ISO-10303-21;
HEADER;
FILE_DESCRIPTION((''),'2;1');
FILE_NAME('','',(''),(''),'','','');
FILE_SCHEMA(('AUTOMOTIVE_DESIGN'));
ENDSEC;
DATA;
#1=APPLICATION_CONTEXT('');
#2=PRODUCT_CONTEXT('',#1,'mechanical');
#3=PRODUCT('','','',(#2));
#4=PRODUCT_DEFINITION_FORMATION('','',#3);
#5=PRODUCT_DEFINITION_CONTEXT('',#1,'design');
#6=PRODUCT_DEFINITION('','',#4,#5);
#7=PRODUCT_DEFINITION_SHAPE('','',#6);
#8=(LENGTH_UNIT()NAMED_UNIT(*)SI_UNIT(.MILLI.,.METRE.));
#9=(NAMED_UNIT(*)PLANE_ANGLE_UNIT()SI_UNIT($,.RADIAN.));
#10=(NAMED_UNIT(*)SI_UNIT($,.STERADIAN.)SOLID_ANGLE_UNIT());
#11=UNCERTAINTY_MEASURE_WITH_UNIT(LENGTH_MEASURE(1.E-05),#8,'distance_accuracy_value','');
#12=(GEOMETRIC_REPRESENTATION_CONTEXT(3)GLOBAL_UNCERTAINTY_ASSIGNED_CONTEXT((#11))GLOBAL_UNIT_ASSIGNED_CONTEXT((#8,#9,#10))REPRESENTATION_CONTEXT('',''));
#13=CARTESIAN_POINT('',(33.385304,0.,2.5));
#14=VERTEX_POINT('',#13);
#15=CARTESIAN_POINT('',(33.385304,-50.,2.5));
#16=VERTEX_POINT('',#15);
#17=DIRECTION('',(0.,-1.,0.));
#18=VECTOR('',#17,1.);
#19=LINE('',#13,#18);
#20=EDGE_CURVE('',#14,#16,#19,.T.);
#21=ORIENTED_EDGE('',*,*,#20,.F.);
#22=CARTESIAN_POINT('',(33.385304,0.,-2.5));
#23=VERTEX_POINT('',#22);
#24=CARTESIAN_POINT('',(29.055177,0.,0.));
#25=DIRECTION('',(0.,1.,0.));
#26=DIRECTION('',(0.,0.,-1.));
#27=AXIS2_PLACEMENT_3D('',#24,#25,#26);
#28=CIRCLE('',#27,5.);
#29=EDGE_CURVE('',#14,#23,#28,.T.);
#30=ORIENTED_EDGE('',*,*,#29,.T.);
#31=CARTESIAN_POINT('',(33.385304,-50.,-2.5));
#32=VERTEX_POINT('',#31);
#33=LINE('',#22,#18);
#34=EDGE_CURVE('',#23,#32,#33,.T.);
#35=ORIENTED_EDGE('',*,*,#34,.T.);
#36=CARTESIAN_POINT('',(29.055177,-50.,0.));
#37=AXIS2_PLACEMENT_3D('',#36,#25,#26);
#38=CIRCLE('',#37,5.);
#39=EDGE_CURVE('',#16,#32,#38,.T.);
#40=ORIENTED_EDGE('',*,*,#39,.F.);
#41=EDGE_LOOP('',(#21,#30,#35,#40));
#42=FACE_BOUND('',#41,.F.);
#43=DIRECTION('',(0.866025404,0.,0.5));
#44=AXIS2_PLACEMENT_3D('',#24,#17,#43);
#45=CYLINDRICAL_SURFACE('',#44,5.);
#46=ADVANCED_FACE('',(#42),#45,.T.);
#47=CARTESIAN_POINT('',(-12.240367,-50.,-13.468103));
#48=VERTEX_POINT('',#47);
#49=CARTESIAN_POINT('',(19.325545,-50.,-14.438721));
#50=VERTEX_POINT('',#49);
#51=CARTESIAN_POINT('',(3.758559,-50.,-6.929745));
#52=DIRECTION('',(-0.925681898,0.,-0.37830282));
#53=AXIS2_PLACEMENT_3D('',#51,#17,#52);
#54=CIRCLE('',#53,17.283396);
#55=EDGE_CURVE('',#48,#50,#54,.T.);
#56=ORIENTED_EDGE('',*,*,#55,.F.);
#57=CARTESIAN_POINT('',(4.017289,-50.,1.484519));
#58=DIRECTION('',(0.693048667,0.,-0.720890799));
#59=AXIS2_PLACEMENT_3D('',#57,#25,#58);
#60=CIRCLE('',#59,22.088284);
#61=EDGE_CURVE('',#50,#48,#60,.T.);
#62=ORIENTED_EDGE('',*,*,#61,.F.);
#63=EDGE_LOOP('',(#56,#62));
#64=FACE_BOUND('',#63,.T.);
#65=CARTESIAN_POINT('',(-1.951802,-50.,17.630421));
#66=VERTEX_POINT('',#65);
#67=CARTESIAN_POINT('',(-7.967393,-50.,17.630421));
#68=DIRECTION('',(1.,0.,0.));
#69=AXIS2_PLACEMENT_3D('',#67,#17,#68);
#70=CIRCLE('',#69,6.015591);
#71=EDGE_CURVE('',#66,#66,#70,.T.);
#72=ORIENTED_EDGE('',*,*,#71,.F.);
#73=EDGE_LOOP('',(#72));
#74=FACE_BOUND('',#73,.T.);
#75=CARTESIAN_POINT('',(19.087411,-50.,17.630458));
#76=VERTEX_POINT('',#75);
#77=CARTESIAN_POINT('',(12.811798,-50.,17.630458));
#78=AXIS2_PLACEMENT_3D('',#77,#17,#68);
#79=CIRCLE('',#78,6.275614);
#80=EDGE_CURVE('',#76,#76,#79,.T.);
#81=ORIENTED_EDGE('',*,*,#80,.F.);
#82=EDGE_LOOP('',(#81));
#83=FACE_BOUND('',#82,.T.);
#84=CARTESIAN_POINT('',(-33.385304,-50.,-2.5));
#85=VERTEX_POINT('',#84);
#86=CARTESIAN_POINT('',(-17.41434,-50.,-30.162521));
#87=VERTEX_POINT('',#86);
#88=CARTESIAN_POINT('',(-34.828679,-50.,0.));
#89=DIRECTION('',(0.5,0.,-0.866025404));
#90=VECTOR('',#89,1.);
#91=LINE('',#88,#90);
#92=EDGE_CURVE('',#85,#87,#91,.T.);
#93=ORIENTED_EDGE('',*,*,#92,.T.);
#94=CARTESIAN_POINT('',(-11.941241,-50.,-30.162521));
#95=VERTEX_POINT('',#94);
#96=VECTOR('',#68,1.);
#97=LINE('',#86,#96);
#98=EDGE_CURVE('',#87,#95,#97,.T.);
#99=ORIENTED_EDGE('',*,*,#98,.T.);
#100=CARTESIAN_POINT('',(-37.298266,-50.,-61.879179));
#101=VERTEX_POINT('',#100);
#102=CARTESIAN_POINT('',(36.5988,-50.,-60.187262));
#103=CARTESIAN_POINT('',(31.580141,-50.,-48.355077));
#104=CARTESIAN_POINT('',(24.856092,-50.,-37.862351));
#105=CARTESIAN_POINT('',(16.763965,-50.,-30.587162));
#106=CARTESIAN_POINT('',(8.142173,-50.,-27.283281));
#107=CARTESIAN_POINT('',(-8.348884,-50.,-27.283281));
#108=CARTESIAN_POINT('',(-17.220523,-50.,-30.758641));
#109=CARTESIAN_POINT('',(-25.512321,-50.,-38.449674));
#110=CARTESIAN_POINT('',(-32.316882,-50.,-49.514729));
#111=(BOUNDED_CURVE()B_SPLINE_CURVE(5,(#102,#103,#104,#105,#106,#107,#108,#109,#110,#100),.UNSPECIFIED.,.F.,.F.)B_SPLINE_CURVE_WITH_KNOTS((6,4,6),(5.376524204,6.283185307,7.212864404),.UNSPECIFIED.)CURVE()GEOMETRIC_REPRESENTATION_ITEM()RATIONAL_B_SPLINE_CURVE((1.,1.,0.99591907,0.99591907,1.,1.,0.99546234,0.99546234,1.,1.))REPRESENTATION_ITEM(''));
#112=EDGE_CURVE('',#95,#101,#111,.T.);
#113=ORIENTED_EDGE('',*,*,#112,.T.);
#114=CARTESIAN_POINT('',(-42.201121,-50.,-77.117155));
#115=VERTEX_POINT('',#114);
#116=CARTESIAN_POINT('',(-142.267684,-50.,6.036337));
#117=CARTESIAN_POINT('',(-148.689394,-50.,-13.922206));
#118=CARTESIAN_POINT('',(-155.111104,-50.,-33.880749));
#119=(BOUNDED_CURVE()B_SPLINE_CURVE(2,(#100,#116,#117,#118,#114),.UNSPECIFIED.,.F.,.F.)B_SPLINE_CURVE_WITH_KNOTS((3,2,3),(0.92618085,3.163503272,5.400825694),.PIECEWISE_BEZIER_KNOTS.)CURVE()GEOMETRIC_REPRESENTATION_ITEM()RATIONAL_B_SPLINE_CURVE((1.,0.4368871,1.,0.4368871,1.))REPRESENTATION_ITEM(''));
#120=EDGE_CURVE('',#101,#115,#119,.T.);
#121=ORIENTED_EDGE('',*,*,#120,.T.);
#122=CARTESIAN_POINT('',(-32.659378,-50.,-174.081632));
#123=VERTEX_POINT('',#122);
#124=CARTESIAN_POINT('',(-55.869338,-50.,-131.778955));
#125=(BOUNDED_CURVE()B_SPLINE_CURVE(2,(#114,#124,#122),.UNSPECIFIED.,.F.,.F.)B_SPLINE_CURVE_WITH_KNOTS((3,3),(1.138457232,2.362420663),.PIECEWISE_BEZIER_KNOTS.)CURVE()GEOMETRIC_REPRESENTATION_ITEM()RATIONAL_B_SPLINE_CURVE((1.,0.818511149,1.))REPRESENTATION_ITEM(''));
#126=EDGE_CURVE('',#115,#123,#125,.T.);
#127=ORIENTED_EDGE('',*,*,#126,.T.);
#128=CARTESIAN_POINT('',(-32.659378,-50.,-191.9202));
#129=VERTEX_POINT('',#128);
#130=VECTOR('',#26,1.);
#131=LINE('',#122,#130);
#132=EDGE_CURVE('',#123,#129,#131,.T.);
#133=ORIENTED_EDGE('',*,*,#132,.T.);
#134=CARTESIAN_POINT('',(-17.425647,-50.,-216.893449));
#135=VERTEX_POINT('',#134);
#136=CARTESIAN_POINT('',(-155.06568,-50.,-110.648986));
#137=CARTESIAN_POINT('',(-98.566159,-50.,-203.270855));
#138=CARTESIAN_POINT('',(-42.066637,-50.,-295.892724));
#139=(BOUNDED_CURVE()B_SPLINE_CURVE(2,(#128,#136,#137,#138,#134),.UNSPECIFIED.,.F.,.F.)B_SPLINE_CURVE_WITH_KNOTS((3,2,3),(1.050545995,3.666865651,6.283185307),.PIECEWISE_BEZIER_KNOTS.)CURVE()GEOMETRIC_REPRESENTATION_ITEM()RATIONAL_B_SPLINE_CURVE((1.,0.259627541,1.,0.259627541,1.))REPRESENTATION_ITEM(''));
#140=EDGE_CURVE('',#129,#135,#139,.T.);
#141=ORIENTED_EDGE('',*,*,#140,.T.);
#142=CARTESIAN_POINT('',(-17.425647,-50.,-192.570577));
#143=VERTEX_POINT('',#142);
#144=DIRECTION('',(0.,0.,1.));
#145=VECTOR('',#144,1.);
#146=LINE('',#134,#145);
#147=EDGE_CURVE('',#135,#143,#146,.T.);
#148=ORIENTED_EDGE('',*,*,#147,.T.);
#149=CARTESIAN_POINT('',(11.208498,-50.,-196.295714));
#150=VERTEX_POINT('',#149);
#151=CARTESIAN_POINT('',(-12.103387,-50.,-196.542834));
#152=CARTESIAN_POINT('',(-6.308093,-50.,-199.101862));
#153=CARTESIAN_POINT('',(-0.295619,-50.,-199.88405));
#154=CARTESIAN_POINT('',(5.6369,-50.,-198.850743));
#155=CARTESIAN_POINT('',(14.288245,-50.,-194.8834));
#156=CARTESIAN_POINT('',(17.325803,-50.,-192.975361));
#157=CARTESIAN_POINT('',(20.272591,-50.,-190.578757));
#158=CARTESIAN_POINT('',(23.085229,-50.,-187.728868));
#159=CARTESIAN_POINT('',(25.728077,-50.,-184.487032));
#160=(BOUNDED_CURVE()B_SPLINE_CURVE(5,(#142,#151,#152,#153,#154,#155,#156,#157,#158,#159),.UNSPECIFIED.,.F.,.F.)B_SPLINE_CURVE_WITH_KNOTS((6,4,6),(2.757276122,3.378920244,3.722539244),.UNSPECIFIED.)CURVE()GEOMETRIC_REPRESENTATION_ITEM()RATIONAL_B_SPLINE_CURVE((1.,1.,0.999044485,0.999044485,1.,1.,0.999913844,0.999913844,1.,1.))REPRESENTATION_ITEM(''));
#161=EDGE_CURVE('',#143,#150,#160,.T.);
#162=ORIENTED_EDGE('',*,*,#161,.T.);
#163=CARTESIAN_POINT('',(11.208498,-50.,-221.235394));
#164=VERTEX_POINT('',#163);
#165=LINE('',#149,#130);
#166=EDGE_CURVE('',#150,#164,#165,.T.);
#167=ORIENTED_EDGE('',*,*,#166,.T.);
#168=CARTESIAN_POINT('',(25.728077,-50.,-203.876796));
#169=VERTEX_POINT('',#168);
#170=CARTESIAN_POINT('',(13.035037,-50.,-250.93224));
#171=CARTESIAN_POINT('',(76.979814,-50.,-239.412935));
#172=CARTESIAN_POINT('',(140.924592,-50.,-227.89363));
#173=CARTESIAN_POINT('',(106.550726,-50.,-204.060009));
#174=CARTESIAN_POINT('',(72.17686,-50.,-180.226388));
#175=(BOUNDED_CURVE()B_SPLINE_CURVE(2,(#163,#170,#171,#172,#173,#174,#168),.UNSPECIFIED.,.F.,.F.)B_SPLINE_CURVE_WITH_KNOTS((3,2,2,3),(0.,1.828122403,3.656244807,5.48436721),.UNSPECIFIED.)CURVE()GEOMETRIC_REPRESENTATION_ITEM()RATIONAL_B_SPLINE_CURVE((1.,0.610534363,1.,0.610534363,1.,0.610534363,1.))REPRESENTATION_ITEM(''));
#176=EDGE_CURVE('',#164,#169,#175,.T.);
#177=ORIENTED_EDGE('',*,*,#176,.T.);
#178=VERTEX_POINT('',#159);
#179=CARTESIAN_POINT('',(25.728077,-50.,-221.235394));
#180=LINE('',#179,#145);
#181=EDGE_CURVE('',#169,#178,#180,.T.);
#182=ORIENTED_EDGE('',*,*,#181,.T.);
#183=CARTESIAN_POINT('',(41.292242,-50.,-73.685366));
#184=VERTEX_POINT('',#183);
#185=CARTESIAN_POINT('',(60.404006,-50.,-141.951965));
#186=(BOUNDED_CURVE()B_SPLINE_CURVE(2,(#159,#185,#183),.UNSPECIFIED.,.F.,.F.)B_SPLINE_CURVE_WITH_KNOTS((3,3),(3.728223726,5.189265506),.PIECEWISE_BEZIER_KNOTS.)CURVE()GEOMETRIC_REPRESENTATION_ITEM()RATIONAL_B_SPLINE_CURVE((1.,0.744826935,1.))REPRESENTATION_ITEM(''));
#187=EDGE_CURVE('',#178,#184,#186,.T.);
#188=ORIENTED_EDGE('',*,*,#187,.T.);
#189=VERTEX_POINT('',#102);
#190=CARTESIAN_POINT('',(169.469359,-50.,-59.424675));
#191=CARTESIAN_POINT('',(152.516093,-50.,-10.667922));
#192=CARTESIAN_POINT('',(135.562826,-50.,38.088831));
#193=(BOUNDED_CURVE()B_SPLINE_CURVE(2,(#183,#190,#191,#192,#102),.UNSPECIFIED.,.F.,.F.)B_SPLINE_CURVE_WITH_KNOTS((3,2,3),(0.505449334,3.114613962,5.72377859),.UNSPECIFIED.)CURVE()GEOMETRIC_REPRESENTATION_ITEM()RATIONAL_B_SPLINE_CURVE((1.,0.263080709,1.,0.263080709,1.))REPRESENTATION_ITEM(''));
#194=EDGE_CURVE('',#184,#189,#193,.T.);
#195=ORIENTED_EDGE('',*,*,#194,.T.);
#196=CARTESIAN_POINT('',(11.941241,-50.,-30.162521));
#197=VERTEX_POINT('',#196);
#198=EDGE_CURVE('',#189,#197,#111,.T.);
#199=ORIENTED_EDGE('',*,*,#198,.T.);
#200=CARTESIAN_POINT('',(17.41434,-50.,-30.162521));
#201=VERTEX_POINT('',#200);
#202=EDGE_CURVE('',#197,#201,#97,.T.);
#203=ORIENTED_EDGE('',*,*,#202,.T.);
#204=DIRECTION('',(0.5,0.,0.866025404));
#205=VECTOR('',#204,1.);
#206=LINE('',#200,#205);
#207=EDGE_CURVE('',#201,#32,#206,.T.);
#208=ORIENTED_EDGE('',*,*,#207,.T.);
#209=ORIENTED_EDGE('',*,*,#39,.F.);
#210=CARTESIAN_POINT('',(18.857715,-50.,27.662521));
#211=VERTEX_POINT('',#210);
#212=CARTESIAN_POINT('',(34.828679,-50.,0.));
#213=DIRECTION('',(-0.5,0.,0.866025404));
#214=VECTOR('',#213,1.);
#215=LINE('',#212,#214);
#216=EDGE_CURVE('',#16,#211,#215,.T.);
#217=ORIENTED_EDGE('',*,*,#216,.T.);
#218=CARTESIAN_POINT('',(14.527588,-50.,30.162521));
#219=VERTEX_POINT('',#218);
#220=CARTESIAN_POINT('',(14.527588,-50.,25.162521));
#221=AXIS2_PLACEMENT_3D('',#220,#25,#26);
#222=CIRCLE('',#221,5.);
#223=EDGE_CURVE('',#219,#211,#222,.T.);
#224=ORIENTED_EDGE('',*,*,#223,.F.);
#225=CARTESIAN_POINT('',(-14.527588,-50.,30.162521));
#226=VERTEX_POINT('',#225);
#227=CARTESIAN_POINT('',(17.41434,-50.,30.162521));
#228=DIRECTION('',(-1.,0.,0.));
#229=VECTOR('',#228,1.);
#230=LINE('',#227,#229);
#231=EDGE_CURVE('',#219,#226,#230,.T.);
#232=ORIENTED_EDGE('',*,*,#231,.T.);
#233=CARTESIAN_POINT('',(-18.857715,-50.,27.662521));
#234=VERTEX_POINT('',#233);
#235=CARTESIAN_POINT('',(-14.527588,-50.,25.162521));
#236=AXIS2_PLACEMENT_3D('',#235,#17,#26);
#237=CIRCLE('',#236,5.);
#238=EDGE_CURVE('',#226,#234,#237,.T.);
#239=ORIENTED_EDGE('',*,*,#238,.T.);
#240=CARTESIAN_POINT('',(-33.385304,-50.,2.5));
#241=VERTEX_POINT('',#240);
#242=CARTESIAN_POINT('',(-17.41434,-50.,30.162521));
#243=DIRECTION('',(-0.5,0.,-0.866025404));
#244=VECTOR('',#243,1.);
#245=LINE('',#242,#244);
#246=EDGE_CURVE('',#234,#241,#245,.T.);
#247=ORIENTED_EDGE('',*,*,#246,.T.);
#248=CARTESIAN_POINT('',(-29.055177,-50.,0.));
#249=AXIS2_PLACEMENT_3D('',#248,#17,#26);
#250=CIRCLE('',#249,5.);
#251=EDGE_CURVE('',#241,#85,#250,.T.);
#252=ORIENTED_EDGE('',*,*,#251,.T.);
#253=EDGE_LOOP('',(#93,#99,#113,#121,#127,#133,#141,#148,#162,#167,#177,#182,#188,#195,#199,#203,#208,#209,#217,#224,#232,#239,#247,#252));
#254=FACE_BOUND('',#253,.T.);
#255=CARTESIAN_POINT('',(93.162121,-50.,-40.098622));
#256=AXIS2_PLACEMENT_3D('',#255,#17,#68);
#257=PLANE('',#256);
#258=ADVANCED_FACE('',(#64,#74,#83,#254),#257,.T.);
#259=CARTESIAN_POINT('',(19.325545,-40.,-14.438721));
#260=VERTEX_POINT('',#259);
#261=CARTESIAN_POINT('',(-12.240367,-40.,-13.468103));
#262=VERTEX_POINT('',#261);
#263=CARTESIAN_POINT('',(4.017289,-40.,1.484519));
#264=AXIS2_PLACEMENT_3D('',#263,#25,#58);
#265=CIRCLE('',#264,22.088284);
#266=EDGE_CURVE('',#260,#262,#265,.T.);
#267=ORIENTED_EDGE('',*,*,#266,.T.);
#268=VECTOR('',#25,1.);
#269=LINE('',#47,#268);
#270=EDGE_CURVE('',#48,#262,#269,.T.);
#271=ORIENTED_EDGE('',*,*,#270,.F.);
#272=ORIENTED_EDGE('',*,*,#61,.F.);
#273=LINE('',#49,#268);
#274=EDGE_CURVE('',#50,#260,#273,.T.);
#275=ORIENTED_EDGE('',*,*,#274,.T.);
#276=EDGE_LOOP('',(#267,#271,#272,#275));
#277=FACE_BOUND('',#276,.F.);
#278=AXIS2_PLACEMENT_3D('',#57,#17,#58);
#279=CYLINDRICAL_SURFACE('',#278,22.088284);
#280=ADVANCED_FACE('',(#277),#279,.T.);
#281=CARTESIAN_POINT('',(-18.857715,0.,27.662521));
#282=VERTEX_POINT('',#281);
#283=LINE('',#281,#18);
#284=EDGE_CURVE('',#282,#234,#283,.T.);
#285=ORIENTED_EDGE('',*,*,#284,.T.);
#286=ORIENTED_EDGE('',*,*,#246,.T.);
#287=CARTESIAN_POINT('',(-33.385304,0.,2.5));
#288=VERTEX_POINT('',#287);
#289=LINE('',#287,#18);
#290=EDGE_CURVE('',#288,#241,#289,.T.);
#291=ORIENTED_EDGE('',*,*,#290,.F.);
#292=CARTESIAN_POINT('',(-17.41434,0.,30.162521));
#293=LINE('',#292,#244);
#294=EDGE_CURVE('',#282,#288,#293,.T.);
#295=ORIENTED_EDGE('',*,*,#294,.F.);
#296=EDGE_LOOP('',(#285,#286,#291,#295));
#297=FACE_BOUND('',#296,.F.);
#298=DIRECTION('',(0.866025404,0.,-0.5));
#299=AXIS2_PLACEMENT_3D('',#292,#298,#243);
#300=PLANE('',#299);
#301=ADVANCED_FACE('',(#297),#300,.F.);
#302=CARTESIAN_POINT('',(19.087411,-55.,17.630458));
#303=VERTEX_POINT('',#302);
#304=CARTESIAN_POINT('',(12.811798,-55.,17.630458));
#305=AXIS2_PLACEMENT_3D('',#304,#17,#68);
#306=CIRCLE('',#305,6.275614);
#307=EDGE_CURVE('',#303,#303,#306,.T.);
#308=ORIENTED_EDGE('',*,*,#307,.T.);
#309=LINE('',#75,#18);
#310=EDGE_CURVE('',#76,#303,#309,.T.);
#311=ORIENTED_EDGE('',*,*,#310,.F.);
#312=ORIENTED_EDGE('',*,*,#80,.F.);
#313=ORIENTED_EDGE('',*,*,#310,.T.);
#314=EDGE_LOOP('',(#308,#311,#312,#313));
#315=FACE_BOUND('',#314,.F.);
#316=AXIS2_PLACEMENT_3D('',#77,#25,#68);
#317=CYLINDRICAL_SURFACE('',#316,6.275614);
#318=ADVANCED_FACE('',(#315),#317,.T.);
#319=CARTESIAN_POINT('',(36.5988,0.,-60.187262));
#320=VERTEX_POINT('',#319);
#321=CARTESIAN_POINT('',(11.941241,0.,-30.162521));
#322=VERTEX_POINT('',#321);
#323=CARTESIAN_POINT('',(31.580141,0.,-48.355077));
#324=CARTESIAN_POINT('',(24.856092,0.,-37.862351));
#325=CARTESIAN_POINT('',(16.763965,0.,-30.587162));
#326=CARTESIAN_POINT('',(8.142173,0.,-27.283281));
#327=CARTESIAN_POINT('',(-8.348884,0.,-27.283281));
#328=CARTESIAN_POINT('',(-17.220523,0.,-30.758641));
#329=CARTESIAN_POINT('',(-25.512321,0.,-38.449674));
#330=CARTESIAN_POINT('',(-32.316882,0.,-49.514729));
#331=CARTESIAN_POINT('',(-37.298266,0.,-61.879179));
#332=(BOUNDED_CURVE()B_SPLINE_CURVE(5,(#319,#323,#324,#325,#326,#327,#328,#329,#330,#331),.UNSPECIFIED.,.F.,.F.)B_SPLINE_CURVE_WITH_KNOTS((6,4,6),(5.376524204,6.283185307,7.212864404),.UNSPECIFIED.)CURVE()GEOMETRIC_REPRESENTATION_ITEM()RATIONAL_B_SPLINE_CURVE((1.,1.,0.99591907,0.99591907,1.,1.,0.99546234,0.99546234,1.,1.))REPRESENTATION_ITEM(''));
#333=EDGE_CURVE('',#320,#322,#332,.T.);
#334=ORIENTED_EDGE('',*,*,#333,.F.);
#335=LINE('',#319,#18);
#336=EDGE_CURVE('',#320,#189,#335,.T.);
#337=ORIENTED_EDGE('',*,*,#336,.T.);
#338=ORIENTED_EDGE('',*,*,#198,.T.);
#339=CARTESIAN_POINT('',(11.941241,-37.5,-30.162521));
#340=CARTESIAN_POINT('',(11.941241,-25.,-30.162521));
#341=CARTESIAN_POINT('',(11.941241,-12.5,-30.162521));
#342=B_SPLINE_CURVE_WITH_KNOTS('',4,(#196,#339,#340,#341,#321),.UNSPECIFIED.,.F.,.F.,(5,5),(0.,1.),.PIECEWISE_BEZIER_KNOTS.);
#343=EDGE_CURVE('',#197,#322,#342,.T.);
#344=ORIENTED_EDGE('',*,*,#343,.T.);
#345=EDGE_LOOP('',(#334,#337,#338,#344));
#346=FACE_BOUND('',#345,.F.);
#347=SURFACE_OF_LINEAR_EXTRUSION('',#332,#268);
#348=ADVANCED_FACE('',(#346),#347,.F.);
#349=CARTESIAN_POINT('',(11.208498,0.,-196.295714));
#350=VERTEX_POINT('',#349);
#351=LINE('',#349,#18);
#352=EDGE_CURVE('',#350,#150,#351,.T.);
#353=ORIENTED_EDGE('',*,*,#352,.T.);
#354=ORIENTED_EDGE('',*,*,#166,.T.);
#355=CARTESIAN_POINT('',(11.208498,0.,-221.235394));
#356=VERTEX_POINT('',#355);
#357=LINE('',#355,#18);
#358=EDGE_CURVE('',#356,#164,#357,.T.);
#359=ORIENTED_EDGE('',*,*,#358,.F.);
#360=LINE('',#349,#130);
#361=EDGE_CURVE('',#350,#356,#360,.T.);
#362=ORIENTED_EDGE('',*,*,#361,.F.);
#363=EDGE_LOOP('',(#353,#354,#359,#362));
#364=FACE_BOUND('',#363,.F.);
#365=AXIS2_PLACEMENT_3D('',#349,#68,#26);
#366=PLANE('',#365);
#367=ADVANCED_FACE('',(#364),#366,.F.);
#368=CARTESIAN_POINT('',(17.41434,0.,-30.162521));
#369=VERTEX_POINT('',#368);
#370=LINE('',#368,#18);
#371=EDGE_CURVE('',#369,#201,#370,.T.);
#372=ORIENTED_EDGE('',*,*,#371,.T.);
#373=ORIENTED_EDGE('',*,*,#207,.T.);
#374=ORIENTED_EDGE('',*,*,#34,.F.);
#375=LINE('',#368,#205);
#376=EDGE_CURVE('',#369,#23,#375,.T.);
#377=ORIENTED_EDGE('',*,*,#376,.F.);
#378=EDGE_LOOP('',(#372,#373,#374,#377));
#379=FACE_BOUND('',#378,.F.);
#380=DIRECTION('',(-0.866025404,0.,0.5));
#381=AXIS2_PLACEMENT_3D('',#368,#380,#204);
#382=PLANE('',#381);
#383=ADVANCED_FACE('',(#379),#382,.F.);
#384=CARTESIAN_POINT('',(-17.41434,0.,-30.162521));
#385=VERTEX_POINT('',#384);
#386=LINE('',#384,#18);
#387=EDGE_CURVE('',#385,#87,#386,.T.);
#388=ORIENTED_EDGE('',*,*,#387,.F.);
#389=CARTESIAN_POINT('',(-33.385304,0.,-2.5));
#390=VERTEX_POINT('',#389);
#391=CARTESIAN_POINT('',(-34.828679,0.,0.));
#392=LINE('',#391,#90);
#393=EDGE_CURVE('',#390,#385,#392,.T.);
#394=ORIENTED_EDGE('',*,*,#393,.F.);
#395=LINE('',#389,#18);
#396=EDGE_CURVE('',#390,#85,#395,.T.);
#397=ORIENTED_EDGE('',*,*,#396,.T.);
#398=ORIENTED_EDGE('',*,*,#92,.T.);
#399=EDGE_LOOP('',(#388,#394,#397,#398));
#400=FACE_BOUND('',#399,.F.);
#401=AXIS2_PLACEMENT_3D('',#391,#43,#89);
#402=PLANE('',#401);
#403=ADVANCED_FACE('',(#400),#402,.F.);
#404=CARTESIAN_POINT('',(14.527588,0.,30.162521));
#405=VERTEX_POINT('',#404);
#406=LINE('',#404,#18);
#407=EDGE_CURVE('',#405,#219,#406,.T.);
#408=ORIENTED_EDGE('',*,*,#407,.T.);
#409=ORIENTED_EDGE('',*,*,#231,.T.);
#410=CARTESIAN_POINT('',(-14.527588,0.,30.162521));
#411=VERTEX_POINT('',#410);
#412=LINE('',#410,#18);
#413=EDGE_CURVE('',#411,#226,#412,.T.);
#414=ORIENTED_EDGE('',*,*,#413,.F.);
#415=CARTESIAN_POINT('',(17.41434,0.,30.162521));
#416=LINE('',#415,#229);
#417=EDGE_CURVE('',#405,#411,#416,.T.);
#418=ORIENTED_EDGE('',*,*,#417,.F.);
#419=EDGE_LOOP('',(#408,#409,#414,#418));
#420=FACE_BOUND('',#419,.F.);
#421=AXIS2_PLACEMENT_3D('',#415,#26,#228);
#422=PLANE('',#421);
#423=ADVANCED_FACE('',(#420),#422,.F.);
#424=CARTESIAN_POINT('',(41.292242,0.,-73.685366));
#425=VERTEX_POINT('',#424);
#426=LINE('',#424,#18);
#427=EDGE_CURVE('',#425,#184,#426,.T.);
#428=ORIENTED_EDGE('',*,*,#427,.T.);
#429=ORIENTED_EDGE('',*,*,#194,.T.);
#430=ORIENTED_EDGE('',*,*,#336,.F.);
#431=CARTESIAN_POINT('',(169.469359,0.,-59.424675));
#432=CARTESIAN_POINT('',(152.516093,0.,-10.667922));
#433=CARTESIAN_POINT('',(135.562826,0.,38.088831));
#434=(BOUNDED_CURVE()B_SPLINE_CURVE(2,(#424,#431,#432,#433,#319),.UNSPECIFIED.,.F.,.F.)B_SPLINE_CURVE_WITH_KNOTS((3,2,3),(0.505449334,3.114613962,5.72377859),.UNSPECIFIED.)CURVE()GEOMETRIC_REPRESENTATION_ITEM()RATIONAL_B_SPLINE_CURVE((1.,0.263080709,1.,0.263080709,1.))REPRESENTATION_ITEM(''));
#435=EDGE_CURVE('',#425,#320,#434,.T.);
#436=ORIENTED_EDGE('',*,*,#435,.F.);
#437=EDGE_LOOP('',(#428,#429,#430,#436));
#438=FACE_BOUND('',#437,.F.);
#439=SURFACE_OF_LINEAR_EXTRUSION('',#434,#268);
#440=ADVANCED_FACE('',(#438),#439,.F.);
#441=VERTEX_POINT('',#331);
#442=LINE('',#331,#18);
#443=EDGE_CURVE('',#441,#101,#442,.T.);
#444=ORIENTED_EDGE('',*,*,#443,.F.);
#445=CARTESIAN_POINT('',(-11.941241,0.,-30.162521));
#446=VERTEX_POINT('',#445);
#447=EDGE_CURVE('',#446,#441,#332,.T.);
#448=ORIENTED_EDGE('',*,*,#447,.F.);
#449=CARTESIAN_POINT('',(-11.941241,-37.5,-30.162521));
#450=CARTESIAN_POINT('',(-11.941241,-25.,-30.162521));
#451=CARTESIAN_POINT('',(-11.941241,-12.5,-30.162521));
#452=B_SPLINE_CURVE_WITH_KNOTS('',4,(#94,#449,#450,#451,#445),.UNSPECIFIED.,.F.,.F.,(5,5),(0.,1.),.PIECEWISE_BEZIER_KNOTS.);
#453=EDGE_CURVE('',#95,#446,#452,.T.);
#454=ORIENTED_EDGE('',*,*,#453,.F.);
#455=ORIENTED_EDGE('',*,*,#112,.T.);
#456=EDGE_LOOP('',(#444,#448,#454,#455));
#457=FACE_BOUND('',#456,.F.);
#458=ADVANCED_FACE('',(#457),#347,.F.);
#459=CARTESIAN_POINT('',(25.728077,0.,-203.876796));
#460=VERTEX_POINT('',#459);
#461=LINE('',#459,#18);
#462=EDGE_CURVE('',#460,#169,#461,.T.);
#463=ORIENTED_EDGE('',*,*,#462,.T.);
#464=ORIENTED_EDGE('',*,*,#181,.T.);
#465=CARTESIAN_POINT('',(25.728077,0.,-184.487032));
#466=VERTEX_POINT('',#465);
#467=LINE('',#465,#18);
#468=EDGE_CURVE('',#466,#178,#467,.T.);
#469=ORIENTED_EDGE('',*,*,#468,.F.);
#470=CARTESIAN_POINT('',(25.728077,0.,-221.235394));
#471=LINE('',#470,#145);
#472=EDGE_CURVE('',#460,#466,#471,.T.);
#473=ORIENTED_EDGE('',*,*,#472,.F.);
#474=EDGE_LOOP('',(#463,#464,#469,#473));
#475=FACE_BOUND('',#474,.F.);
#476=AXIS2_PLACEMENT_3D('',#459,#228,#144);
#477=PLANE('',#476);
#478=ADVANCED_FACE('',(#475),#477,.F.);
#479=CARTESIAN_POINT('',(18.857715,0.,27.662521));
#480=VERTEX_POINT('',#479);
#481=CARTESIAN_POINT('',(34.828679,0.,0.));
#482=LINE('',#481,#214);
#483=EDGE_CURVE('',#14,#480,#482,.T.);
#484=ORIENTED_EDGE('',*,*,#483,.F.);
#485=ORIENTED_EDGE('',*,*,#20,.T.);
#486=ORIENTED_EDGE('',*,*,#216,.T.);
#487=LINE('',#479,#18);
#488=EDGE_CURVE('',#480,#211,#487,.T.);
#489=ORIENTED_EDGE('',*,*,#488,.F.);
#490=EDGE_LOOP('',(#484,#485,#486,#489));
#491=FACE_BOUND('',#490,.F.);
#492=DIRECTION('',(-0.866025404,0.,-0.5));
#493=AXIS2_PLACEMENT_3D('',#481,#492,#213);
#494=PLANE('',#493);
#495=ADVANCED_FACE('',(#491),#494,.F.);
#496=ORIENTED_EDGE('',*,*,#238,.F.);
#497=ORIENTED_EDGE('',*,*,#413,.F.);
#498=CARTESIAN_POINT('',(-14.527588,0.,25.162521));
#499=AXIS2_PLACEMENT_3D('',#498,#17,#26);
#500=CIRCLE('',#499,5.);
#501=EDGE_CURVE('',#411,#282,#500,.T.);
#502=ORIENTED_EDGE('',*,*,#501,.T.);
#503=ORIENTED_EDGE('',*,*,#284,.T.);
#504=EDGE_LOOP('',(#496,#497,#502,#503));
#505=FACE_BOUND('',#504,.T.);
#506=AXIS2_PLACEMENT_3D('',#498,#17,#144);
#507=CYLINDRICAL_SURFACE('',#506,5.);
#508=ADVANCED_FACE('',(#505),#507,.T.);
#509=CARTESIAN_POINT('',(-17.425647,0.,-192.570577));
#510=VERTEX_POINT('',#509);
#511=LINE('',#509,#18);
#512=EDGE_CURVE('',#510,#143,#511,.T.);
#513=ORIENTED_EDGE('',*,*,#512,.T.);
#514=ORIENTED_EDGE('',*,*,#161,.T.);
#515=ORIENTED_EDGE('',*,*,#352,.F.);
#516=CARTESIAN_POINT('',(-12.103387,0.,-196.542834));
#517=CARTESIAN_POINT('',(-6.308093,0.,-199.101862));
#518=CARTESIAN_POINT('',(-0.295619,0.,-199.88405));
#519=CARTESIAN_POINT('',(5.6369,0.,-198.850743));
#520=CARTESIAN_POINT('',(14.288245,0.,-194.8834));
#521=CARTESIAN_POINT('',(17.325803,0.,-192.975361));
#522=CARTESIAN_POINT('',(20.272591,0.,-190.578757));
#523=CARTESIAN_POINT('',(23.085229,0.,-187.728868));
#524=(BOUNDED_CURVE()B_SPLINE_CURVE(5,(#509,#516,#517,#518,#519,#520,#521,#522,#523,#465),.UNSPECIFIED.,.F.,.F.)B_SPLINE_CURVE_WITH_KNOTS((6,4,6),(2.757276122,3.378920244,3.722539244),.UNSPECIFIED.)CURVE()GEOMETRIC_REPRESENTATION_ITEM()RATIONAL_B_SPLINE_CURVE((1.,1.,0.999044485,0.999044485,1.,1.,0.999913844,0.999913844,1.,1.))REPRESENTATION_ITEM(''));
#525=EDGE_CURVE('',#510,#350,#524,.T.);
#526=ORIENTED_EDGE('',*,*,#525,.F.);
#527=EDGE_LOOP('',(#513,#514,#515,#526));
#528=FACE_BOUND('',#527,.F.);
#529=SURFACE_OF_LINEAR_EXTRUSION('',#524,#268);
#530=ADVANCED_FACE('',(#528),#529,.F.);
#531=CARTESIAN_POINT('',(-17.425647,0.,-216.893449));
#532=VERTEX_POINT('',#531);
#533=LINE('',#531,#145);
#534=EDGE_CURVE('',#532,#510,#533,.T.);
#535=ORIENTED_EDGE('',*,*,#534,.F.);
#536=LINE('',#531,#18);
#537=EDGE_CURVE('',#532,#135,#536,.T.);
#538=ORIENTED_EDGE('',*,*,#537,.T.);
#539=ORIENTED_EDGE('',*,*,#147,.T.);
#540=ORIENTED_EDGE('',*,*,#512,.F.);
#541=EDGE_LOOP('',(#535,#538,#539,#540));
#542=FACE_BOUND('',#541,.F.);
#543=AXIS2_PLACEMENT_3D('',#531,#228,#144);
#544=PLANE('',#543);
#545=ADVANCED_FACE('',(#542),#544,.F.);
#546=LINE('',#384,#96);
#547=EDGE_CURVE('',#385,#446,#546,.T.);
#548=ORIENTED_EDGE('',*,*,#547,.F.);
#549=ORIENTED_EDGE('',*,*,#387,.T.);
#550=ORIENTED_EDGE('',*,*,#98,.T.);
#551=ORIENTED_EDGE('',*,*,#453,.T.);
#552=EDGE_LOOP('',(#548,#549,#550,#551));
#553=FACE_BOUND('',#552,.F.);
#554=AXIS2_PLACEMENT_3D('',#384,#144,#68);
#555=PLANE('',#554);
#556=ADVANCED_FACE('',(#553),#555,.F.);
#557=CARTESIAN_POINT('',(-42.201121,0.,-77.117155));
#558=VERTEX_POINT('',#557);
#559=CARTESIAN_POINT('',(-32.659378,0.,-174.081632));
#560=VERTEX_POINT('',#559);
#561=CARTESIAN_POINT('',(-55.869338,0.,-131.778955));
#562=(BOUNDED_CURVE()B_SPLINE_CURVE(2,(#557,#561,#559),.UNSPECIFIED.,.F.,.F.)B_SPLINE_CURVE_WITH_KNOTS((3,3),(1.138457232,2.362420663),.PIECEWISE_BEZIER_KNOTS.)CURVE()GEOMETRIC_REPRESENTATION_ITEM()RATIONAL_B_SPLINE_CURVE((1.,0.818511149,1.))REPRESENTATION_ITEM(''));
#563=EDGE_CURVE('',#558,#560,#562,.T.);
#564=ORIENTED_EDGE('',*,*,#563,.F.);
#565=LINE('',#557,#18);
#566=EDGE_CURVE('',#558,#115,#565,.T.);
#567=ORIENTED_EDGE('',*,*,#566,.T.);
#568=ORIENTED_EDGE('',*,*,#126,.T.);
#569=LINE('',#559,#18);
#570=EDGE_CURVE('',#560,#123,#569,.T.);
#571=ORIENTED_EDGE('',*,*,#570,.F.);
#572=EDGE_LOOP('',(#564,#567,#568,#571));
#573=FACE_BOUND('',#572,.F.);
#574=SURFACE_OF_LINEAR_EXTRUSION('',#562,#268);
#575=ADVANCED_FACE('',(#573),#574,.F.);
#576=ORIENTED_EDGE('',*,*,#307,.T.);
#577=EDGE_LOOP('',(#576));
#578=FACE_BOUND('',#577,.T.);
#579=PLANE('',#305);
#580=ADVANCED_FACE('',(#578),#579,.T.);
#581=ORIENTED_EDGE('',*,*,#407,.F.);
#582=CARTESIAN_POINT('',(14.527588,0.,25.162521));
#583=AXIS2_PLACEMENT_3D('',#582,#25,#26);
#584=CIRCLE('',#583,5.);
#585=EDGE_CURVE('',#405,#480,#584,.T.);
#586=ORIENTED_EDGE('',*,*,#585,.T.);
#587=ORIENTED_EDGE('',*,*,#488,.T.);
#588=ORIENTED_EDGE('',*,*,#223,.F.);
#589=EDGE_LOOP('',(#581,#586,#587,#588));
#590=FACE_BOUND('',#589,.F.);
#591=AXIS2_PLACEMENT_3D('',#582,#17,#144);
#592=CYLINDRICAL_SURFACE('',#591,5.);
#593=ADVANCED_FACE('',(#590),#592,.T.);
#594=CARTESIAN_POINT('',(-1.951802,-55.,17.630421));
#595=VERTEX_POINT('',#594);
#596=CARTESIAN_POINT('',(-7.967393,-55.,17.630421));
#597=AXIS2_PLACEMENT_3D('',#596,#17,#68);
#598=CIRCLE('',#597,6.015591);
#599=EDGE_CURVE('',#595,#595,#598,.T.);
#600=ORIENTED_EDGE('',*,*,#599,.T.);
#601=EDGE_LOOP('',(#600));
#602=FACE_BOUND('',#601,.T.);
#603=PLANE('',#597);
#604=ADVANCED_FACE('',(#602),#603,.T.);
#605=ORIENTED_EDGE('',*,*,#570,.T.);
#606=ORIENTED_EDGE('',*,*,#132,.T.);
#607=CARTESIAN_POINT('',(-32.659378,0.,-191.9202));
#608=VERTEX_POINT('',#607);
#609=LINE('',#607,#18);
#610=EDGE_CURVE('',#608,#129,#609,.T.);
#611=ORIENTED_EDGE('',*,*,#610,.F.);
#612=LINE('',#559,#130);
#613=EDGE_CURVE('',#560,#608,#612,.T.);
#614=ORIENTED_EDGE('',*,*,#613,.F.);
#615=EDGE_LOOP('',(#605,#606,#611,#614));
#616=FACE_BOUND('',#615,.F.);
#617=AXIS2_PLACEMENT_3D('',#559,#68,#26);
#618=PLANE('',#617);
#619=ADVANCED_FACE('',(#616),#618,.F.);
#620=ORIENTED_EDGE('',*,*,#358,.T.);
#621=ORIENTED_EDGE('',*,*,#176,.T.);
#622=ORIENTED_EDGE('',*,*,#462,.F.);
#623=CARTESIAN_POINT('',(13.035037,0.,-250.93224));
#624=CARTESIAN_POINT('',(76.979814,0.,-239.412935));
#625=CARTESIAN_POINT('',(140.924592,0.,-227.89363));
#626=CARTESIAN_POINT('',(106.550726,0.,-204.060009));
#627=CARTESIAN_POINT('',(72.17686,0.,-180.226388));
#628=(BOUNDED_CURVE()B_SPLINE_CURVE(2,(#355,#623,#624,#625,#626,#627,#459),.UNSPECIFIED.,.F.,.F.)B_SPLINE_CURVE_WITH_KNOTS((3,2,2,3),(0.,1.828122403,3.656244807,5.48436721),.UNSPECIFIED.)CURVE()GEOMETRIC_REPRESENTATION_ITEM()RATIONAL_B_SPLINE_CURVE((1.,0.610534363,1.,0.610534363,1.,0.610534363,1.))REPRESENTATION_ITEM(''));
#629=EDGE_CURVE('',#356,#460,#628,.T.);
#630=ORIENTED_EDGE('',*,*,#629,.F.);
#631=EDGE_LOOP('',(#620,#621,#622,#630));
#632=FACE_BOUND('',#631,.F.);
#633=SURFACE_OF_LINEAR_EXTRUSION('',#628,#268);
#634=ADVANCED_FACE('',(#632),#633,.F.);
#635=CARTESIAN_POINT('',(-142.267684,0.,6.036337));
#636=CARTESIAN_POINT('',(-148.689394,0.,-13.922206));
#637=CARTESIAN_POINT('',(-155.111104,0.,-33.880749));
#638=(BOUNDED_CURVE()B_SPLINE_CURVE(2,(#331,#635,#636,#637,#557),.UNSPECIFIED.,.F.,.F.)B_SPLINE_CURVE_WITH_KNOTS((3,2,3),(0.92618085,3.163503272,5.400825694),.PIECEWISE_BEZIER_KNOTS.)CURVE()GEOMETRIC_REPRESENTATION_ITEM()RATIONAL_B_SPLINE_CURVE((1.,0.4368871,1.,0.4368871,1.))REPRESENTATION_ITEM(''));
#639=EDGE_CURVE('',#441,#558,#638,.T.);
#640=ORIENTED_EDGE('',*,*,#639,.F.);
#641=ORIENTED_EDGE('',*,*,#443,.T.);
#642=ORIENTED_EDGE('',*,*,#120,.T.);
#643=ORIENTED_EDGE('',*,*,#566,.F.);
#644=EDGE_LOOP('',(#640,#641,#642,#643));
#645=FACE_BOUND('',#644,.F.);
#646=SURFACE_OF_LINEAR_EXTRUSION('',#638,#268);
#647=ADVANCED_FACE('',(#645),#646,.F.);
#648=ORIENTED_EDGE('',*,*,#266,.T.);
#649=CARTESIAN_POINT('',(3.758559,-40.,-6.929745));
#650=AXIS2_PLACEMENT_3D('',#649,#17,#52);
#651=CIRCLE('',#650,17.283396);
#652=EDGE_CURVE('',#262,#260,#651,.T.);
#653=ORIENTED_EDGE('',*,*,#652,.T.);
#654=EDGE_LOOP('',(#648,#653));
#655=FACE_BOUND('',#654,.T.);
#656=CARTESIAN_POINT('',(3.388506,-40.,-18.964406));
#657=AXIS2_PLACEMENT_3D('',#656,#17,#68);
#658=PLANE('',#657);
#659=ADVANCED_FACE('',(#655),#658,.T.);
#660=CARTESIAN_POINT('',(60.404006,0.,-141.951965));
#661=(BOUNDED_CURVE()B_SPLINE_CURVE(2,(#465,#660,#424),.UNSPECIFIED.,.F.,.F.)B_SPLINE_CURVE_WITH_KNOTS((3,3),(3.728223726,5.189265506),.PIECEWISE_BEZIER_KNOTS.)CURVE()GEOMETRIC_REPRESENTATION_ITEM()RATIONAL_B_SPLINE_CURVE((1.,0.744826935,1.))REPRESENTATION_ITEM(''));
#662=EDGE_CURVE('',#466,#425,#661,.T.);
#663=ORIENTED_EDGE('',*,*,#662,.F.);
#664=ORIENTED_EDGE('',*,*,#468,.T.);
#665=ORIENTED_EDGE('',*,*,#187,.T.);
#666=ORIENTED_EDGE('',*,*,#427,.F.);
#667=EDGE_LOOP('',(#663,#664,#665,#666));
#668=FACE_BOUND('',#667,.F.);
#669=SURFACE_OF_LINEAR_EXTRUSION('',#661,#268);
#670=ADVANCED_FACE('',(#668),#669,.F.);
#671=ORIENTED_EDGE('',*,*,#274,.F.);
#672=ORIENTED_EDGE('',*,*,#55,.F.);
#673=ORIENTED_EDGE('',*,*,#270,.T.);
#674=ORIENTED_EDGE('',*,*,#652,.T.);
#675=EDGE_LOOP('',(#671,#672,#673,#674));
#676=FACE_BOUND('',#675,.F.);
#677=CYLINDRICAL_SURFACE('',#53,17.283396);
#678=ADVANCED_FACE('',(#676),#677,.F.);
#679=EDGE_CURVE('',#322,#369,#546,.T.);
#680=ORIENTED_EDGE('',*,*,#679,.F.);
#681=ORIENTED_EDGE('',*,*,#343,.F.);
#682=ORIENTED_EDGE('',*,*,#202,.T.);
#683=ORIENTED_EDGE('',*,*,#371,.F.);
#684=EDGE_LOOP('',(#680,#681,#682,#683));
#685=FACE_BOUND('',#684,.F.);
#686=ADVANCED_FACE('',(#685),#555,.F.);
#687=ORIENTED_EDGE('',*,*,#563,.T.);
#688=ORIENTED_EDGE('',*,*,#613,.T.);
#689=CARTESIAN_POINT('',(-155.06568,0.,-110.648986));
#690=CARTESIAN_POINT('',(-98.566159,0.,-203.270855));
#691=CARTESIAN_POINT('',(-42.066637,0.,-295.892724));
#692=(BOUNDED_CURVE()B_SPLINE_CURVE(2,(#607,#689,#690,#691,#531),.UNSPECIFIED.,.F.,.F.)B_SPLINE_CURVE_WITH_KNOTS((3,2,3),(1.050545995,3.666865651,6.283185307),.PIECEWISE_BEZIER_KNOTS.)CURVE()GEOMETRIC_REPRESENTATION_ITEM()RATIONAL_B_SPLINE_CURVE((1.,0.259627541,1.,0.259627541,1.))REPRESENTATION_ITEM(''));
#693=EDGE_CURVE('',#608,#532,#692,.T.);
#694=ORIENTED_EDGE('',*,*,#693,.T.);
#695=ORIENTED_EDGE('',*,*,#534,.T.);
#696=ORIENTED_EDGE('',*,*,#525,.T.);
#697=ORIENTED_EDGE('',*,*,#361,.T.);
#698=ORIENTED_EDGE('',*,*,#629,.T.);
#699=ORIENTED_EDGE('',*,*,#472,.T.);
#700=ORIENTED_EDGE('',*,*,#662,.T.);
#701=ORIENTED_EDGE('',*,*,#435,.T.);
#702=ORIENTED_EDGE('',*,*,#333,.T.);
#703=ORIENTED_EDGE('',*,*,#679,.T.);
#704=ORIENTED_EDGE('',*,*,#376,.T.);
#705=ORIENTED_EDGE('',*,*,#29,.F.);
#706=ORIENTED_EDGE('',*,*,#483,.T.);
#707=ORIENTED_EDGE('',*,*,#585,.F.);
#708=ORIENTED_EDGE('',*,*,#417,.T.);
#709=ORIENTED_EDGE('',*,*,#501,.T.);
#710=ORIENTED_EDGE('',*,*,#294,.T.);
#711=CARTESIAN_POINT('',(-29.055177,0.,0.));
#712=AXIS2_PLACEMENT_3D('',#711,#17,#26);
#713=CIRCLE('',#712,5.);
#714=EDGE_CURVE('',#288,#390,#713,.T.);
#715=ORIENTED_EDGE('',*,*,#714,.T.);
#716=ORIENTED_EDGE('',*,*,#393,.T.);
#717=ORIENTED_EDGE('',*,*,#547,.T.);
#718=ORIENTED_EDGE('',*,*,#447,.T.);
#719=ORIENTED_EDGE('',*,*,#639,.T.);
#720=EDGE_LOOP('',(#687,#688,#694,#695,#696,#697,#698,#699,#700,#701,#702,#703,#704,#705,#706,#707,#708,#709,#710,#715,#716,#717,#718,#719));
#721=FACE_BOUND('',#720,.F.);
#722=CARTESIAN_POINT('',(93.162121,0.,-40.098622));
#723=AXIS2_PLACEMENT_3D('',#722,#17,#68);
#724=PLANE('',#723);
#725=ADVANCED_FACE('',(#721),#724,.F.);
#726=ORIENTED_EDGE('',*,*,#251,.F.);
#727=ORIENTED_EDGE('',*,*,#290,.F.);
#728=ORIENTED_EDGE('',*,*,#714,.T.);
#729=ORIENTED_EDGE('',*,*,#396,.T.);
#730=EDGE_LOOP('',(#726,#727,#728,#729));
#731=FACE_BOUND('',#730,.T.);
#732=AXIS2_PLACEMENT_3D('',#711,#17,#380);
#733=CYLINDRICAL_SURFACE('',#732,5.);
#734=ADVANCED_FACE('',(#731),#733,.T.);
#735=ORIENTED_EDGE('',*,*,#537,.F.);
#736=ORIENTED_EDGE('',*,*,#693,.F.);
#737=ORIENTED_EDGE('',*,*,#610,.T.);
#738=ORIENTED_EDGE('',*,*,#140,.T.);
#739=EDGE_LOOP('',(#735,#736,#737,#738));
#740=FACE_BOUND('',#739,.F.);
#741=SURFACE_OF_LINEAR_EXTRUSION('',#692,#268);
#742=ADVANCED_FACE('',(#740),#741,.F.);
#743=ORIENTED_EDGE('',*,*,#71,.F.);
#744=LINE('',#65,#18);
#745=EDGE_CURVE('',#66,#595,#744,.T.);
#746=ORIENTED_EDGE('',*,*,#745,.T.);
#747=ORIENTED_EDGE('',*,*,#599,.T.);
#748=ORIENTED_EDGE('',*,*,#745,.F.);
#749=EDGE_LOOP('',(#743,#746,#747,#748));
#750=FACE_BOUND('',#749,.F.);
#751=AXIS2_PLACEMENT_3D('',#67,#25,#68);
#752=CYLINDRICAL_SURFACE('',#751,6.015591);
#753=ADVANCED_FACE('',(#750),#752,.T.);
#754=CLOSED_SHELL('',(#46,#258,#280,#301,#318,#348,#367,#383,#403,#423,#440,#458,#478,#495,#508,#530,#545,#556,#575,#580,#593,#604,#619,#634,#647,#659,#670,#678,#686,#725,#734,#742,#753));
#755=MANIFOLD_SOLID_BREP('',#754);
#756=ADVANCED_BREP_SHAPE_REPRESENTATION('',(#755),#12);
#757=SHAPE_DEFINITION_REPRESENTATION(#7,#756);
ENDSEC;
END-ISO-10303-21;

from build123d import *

# Parameters (mm, degrees)
F1_DEPTH = 50
F2_R     = 6.0155907658
F2_R_2   = 6.2756136539
F3_DEPTH = 5
F4_DEPTH = 10
F5_R     = 5
F7_DEPTH = 50


with BuildPart() as f1:
    # F0 (on Front) → F1 (new body)
    with BuildSketch(Plane.XZ):
        Polygon((17.4143397291, 30.1625211911), (-17.4143397291, 30.1625211911), (-34.8286794583, 0), (-17.4143397291, -30.1625211911), (17.4143397291, -30.1625211911), (34.8286794583, 0), align=None)
    extrude(amount=F1_DEPTH)

    # F2 (on face) → F3 (join)
    with BuildSketch(Plane.XZ.offset(50)):
        with Locations((-7.967392914, 17.6304206252)):
            Circle(F2_R)
        with Locations((12.811797671, 17.6304578781)):
            Circle(F2_R_2)
    extrude(amount=F3_DEPTH)

    # F2 (on face) → F4 (cut)
    with BuildSketch(Plane.XZ.offset(50)):
        with BuildLine():
            ThreePointArc((19.3255450577, -14.4387213513), (3.3384184901, -20.5933298221), (-12.2403670102, -13.468102552))
            ThreePointArc((-12.2403670102, -13.468102552), (3.2273641474, -24.2049759369), (19.3255450577, -14.4387213513))
        make_face()
    extrude(amount=-F4_DEPTH, mode=Mode.SUBTRACT)

    # F5
    f5_edges = [f1.edges().sort_by_distance(p)[0] for p in [
        (17.41434, -25, 30.162521),
        (-17.41434, -25, 30.162521),
        (34.828679, -25, 0),
        (-34.828679, -25, 0),
    ]]
    fillet(f5_edges, radius=F5_R)

    # F6 (on Front) → F7 (join)
    with BuildSketch(Plane.XZ):
        with BuildLine():
            add(Edge.make_bspline(
                [(41.2922416881, -73.6853662735), (169.4693590378, -59.4246752204), (152.5160927466, -10.667922077), (135.5628264553, 38.0888310665), (36.5988004625, -60.1872620557)],
                knots=[0.5054493336, 0.5054493336, 0.5054493336, 3.1146139618, 3.1146139618, 5.7237785899, 5.7237785899, 5.7237785899], degree=2, weights=[1, 0.2630807094, 1, 0.2630807094, 1]))
            add(Edge.make_bspline(
                [(41.2922416881, -73.6853662735), (39.2889405165, -66.529639937), (36.5988004625, -60.1872620557)],
                knots=[5.1892655065, 5.1892655065, 5.1892655065, 5.376524204, 5.376524204, 5.376524204], degree=2, weights=[1, 0.9956199737, 1]))
        make_face()
        with BuildLine():
            add(Edge.make_bspline(
                [(-37.2982655111, -61.8791791625), (-40.1784962307, -69.0282916237), (-42.20112137, -77.1171546989)],
                knots=[0.9314728887, 0.9314728887, 0.9314728887, 1.1384572321, 1.1384572321, 1.1384572321], degree=2, weights=[1, 0.9946494634, 1]))
            add(Edge.make_bspline(
                [(-37.2982655111, -61.8791791625), (-142.2676835981, 6.0363373075), (-148.6893936246, -13.9222058565), (-155.1111036512, -33.8807490205), (-42.20112137, -77.1171546989)],
                knots=[0.9261808498, 0.9261808498, 0.9261808498, 3.1635032717, 3.1635032717, 5.4008256936, 5.4008256936, 5.4008256936], degree=2, weights=[1, 0.4368871001, 1, 0.4368871001, 1]))
        make_face()
        with BuildLine():
            add(Edge.make_bspline(
                [(36.5988004625, -60.1872620557), (22.6424707083, -27.2832810879), (0, -27.2832810879)],
                knots=[5.376524204, 5.376524204, 5.376524204, 6.2831853072, 6.2831853072, 6.2831853072], degree=2, weights=[1, 0.8989934357, 1]))
            add(Edge.make_bspline(
                [(0, -27.2832810879), (-23.3602880424, -27.2832810879), (-37.2982655111, -61.8791791625)],
                knots=[0, 0, 0, 0.9314728887, 0.9314728887, 0.9314728887], degree=2, weights=[1, 0.8934910848, 1]))
            add(Edge.make_bspline(
                [(-14.1357605669, -82.8124405083), (-11.8424071187, -78.3491930143), (-37.2982655111, -61.8791791625)],
                knots=[0, 0, 0, 0.9261808498, 0.9261808498, 0.9261808498], degree=2, weights=[1, 0.8946762325, 1]))
            add(Edge.make_bspline(
                [(-42.20112137, -77.1171546989), (-16.3047277649, -87.0336116578), (-14.1357605669, -82.8124405083)],
                knots=[5.4008256936, 5.4008256936, 5.4008256936, 6.2831853072, 6.2831853072, 6.2831853072], degree=2, weights=[1, 0.9042485074, 1]))
            add(Edge.make_bspline(
                [(-42.20112137, -77.1171546989), (-55.8693379467, -131.7789554553), (-32.6593779027, -174.0816324883)],
                knots=[1.1384572321, 1.1384572321, 1.1384572321, 2.3624206627, 2.3624206627, 2.3624206627], degree=2, weights=[1, 0.8185111489, 1]))
            Line((-32.6593779027, -174.0816324883), (-32.6593779027, -169.5833057165))
            Line((-32.6593779027, -169.5833057165), (-17.4256470054, -169.5833057165))
            Line((-17.4256470054, -169.5833057165), (-17.4256470054, -192.5705769551))
            add(Edge.make_bspline(
                [(-17.4256470054, -192.5705769551), (-3.4362621433, -203.0115231159), (11.2084979191, -196.2957137528)],
                knots=[2.7572761224, 2.7572761224, 2.7572761224, 3.3851526537, 3.3851526537, 3.3851526537], degree=2, weights=[1, 0.9511247857, 1]))
            Line((11.2084979191, -196.2957137528), (11.2084979191, -181.6708147526))
            Line((11.2084979191, -181.6708147526), (25.7280766964, -181.6708147526))
            Line((25.7280766964, -181.6708147526), (25.7280766964, -184.4870319799))
            add(Edge.make_bspline(
                [(25.7280766964, -184.4870319799), (60.4040061865, -141.9519646735), (41.2922416881, -73.6853662735)],
                knots=[3.7282237262, 3.7282237262, 3.7282237262, 5.1892655065, 5.1892655065, 5.1892655065], degree=2, weights=[1, 0.7448269354, 1]))
            add(Edge.make_bspline(
                [(30.647560719, -71.4679593328), (32.2659775962, -74.6896076408), (41.2922416881, -73.6853662735)],
                knots=[0, 0, 0, 0.5054493336, 0.5054493336, 0.5054493336], degree=2, weights=[1, 0.9682347327, 1]))
            add(Edge.make_bspline(
                [(36.5988004625, -60.1872620557), (28.8474842086, -67.884696253), (30.647560719, -71.4679593328)],
                knots=[5.7237785899, 5.7237785899, 5.7237785899, 6.2831853072, 6.2831853072, 6.2831853072], degree=2, weights=[1, 0.9611373745, 1]))
        make_face()
        with BuildLine():
            add(Edge.make_bspline(
                [(41.2922416881, -73.6853662735), (39.2889405165, -66.529639937), (36.5988004625, -60.1872620557)],
                knots=[5.1892655065, 5.1892655065, 5.1892655065, 5.376524204, 5.376524204, 5.376524204], degree=2, weights=[1, 0.9956199737, 1]))
            add(Edge.make_bspline(
                [(36.5988004625, -60.1872620557), (28.8474842086, -67.884696253), (30.647560719, -71.4679593328)],
                knots=[5.7237785899, 5.7237785899, 5.7237785899, 6.2831853072, 6.2831853072, 6.2831853072], degree=2, weights=[1, 0.9611373745, 1]))
            add(Edge.make_bspline(
                [(30.647560719, -71.4679593328), (32.2659775962, -74.6896076408), (41.2922416881, -73.6853662735)],
                knots=[0, 0, 0, 0.5054493336, 0.5054493336, 0.5054493336], degree=2, weights=[1, 0.9682347327, 1]))
        make_face()
        with BuildLine():
            add(Edge.make_bspline(
                [(-14.1357605669, -82.8124405083), (-11.8424071187, -78.3491930143), (-37.2982655111, -61.8791791625)],
                knots=[0, 0, 0, 0.9261808498, 0.9261808498, 0.9261808498], degree=2, weights=[1, 0.8946762325, 1]))
            add(Edge.make_bspline(
                [(-37.2982655111, -61.8791791625), (-40.1784962307, -69.0282916237), (-42.20112137, -77.1171546989)],
                knots=[0.9314728887, 0.9314728887, 0.9314728887, 1.1384572321, 1.1384572321, 1.1384572321], degree=2, weights=[1, 0.9946494634, 1]))
            add(Edge.make_bspline(
                [(-42.20112137, -77.1171546989), (-16.3047277649, -87.0336116578), (-14.1357605669, -82.8124405083)],
                knots=[5.4008256936, 5.4008256936, 5.4008256936, 6.2831853072, 6.2831853072, 6.2831853072], degree=2, weights=[1, 0.9042485074, 1]))
        make_face()
        with BuildLine():
            Line((-32.6593779027, -169.5833057165), (-32.6593779027, -174.0816324883))
            add(Edge.make_bspline(
                [(-32.6593779027, -174.0816324883), (-26.0445481198, -186.1378793499), (-17.4256470054, -192.5705769551)],
                knots=[2.3624206627, 2.3624206627, 2.3624206627, 2.7572761224, 2.7572761224, 2.7572761224], degree=2, weights=[1, 0.9805743661, 1]))
            Line((-17.4256470054, -192.5705769551), (-17.4256470054, -169.5833057165))
            Line((-17.4256470054, -169.5833057165), (-32.6593779027, -169.5833057165))
        make_face()
        with BuildLine():
            add(Edge.make_bspline(
                [(-32.6593779027, -174.0816324883), (-26.0445481198, -186.1378793499), (-17.4256470054, -192.5705769551)],
                knots=[2.3624206627, 2.3624206627, 2.3624206627, 2.7572761224, 2.7572761224, 2.7572761224], degree=2, weights=[1, 0.9805743661, 1]))
            Line((-32.6593779027, -174.0816324883), (-32.6593779027, -191.9202000812))
            add(Edge.make_bspline(
                [(-17.4256470054, -209.6746091398), (-19.9783918544, -200.3396941884), (-32.6593779027, -191.9202000812)],
                knots=[0.3149352399, 0.3149352399, 0.3149352399, 1.0505459948, 1.0505459948, 1.0505459948], degree=2, weights=[1, 0.9331187091, 1]))
            Line((-17.4256470054, -209.6746091398), (-17.4256470054, -192.5705769551))
        make_face()
        with BuildLine():
            add(Edge.make_bspline(
                [(-17.4256470054, -209.6746091398), (-19.9783918544, -200.3396941884), (-32.6593779027, -191.9202000812)],
                knots=[0.3149352399, 0.3149352399, 0.3149352399, 1.0505459948, 1.0505459948, 1.0505459948], degree=2, weights=[1, 0.9331187091, 1]))
            Line((-32.6593779027, -191.9202000812), (-32.6593779027, -216.8934494257))
            Line((-32.6593779027, -216.8934494257), (-17.4256470054, -216.8934494257))
            Line((-17.4256470054, -216.8934494257), (-17.4256470054, -209.6746091398))
        make_face()
        with BuildLine():
            Line((-32.6593779027, -216.8934494257), (-32.6593779027, -191.9202000812))
            add(Edge.make_bspline(
                [(-32.6593779027, -191.9202000812), (-155.0656797466, -110.6489855928), (-98.566158617, -203.2708546887), (-42.0666374873, -295.8927237846), (-17.4256470054, -216.8934494257)],
                knots=[1.0505459948, 1.0505459948, 1.0505459948, 3.666865651, 3.666865651, 6.2831853072, 6.2831853072, 6.2831853072], degree=2, weights=[1, 0.2596275414, 1, 0.2596275414, 1]))
            Line((-17.4256470054, -216.8934494257), (-32.6593779027, -216.8934494257))
        make_face()
        with BuildLine():
            add(Edge.make_bspline(
                [(11.2084979191, -196.2957137528), (19.0225466962, -192.7123391043), (25.7280766964, -184.4870319799)],
                knots=[3.3851526537, 3.3851526537, 3.3851526537, 3.7282237262, 3.7282237262, 3.7282237262], degree=2, weights=[1, 0.9853238194, 1]))
            Line((25.7280766964, -184.4870319799), (25.7280766964, -181.6708147526))
            Line((25.7280766964, -181.6708147526), (11.2084979191, -181.6708147526))
            Line((11.2084979191, -181.6708147526), (11.2084979191, -196.2957137528))
        make_face()
        with BuildLine():
            Line((25.7280766964, -203.876795604), (25.7280766964, -184.4870319799))
            add(Edge.make_bspline(
                [(11.2084979191, -196.2957137528), (19.0225466962, -192.7123391043), (25.7280766964, -184.4870319799)],
                knots=[3.3851526537, 3.3851526537, 3.3851526537, 3.7282237262, 3.7282237262, 3.7282237262], degree=2, weights=[1, 0.9853238194, 1]))
            Line((11.2084979191, -196.2957137528), (11.2084979191, -219.9759412186))
            add(Edge.make_bspline(
                [(25.7280766964, -203.876795604), (11.7578588698, -210.9900355862), (11.2084979191, -219.9759412186)],
                knots=[5.4843672103, 5.4843672103, 5.4843672103, 6.2283501589, 6.2283501589, 6.2283501589], degree=2, weights=[1, 0.9316053495, 1]))
        make_face()
        with BuildLine():
            Line((25.7280766964, -221.2353944778), (25.7280766964, -203.876795604))
            add(Edge.make_bspline(
                [(25.7280766964, -203.876795604), (11.7578588698, -210.9900355862), (11.2084979191, -219.9759412186)],
                knots=[5.4843672103, 5.4843672103, 5.4843672103, 6.2283501589, 6.2283501589, 6.2283501589], degree=2, weights=[1, 0.9316053495, 1]))
            Line((11.2084979191, -219.9759412186), (11.2084979191, -221.2353944778))
            Line((11.2084979191, -221.2353944778), (25.7280766964, -221.2353944778))
        make_face()
        with BuildLine():
            add(Edge.make_bspline(
                [(11.2084979191, -221.2353944778), (13.0350369218, -250.9322399042), (76.9798142406, -239.4129351389), (140.9245915595, -227.8936303736), (106.5507257658, -204.0600093155), (72.1768599722, -180.2263882575), (25.7280766964, -203.876795604)],
                knots=[0, 0, 0, 1.8281224034, 1.8281224034, 3.6562448069, 3.6562448069, 5.4843672103, 5.4843672103, 5.4843672103], degree=2, weights=[1, 0.610534363, 1, 0.610534363, 1, 0.610534363, 1]))
            Line((25.7280766964, -203.876795604), (25.7280766964, -221.2353944778))
            Line((25.7280766964, -221.2353944778), (11.2084979191, -221.2353944778))
        make_face()
    extrude(amount=F7_DEPTH)


solid = f1.part
